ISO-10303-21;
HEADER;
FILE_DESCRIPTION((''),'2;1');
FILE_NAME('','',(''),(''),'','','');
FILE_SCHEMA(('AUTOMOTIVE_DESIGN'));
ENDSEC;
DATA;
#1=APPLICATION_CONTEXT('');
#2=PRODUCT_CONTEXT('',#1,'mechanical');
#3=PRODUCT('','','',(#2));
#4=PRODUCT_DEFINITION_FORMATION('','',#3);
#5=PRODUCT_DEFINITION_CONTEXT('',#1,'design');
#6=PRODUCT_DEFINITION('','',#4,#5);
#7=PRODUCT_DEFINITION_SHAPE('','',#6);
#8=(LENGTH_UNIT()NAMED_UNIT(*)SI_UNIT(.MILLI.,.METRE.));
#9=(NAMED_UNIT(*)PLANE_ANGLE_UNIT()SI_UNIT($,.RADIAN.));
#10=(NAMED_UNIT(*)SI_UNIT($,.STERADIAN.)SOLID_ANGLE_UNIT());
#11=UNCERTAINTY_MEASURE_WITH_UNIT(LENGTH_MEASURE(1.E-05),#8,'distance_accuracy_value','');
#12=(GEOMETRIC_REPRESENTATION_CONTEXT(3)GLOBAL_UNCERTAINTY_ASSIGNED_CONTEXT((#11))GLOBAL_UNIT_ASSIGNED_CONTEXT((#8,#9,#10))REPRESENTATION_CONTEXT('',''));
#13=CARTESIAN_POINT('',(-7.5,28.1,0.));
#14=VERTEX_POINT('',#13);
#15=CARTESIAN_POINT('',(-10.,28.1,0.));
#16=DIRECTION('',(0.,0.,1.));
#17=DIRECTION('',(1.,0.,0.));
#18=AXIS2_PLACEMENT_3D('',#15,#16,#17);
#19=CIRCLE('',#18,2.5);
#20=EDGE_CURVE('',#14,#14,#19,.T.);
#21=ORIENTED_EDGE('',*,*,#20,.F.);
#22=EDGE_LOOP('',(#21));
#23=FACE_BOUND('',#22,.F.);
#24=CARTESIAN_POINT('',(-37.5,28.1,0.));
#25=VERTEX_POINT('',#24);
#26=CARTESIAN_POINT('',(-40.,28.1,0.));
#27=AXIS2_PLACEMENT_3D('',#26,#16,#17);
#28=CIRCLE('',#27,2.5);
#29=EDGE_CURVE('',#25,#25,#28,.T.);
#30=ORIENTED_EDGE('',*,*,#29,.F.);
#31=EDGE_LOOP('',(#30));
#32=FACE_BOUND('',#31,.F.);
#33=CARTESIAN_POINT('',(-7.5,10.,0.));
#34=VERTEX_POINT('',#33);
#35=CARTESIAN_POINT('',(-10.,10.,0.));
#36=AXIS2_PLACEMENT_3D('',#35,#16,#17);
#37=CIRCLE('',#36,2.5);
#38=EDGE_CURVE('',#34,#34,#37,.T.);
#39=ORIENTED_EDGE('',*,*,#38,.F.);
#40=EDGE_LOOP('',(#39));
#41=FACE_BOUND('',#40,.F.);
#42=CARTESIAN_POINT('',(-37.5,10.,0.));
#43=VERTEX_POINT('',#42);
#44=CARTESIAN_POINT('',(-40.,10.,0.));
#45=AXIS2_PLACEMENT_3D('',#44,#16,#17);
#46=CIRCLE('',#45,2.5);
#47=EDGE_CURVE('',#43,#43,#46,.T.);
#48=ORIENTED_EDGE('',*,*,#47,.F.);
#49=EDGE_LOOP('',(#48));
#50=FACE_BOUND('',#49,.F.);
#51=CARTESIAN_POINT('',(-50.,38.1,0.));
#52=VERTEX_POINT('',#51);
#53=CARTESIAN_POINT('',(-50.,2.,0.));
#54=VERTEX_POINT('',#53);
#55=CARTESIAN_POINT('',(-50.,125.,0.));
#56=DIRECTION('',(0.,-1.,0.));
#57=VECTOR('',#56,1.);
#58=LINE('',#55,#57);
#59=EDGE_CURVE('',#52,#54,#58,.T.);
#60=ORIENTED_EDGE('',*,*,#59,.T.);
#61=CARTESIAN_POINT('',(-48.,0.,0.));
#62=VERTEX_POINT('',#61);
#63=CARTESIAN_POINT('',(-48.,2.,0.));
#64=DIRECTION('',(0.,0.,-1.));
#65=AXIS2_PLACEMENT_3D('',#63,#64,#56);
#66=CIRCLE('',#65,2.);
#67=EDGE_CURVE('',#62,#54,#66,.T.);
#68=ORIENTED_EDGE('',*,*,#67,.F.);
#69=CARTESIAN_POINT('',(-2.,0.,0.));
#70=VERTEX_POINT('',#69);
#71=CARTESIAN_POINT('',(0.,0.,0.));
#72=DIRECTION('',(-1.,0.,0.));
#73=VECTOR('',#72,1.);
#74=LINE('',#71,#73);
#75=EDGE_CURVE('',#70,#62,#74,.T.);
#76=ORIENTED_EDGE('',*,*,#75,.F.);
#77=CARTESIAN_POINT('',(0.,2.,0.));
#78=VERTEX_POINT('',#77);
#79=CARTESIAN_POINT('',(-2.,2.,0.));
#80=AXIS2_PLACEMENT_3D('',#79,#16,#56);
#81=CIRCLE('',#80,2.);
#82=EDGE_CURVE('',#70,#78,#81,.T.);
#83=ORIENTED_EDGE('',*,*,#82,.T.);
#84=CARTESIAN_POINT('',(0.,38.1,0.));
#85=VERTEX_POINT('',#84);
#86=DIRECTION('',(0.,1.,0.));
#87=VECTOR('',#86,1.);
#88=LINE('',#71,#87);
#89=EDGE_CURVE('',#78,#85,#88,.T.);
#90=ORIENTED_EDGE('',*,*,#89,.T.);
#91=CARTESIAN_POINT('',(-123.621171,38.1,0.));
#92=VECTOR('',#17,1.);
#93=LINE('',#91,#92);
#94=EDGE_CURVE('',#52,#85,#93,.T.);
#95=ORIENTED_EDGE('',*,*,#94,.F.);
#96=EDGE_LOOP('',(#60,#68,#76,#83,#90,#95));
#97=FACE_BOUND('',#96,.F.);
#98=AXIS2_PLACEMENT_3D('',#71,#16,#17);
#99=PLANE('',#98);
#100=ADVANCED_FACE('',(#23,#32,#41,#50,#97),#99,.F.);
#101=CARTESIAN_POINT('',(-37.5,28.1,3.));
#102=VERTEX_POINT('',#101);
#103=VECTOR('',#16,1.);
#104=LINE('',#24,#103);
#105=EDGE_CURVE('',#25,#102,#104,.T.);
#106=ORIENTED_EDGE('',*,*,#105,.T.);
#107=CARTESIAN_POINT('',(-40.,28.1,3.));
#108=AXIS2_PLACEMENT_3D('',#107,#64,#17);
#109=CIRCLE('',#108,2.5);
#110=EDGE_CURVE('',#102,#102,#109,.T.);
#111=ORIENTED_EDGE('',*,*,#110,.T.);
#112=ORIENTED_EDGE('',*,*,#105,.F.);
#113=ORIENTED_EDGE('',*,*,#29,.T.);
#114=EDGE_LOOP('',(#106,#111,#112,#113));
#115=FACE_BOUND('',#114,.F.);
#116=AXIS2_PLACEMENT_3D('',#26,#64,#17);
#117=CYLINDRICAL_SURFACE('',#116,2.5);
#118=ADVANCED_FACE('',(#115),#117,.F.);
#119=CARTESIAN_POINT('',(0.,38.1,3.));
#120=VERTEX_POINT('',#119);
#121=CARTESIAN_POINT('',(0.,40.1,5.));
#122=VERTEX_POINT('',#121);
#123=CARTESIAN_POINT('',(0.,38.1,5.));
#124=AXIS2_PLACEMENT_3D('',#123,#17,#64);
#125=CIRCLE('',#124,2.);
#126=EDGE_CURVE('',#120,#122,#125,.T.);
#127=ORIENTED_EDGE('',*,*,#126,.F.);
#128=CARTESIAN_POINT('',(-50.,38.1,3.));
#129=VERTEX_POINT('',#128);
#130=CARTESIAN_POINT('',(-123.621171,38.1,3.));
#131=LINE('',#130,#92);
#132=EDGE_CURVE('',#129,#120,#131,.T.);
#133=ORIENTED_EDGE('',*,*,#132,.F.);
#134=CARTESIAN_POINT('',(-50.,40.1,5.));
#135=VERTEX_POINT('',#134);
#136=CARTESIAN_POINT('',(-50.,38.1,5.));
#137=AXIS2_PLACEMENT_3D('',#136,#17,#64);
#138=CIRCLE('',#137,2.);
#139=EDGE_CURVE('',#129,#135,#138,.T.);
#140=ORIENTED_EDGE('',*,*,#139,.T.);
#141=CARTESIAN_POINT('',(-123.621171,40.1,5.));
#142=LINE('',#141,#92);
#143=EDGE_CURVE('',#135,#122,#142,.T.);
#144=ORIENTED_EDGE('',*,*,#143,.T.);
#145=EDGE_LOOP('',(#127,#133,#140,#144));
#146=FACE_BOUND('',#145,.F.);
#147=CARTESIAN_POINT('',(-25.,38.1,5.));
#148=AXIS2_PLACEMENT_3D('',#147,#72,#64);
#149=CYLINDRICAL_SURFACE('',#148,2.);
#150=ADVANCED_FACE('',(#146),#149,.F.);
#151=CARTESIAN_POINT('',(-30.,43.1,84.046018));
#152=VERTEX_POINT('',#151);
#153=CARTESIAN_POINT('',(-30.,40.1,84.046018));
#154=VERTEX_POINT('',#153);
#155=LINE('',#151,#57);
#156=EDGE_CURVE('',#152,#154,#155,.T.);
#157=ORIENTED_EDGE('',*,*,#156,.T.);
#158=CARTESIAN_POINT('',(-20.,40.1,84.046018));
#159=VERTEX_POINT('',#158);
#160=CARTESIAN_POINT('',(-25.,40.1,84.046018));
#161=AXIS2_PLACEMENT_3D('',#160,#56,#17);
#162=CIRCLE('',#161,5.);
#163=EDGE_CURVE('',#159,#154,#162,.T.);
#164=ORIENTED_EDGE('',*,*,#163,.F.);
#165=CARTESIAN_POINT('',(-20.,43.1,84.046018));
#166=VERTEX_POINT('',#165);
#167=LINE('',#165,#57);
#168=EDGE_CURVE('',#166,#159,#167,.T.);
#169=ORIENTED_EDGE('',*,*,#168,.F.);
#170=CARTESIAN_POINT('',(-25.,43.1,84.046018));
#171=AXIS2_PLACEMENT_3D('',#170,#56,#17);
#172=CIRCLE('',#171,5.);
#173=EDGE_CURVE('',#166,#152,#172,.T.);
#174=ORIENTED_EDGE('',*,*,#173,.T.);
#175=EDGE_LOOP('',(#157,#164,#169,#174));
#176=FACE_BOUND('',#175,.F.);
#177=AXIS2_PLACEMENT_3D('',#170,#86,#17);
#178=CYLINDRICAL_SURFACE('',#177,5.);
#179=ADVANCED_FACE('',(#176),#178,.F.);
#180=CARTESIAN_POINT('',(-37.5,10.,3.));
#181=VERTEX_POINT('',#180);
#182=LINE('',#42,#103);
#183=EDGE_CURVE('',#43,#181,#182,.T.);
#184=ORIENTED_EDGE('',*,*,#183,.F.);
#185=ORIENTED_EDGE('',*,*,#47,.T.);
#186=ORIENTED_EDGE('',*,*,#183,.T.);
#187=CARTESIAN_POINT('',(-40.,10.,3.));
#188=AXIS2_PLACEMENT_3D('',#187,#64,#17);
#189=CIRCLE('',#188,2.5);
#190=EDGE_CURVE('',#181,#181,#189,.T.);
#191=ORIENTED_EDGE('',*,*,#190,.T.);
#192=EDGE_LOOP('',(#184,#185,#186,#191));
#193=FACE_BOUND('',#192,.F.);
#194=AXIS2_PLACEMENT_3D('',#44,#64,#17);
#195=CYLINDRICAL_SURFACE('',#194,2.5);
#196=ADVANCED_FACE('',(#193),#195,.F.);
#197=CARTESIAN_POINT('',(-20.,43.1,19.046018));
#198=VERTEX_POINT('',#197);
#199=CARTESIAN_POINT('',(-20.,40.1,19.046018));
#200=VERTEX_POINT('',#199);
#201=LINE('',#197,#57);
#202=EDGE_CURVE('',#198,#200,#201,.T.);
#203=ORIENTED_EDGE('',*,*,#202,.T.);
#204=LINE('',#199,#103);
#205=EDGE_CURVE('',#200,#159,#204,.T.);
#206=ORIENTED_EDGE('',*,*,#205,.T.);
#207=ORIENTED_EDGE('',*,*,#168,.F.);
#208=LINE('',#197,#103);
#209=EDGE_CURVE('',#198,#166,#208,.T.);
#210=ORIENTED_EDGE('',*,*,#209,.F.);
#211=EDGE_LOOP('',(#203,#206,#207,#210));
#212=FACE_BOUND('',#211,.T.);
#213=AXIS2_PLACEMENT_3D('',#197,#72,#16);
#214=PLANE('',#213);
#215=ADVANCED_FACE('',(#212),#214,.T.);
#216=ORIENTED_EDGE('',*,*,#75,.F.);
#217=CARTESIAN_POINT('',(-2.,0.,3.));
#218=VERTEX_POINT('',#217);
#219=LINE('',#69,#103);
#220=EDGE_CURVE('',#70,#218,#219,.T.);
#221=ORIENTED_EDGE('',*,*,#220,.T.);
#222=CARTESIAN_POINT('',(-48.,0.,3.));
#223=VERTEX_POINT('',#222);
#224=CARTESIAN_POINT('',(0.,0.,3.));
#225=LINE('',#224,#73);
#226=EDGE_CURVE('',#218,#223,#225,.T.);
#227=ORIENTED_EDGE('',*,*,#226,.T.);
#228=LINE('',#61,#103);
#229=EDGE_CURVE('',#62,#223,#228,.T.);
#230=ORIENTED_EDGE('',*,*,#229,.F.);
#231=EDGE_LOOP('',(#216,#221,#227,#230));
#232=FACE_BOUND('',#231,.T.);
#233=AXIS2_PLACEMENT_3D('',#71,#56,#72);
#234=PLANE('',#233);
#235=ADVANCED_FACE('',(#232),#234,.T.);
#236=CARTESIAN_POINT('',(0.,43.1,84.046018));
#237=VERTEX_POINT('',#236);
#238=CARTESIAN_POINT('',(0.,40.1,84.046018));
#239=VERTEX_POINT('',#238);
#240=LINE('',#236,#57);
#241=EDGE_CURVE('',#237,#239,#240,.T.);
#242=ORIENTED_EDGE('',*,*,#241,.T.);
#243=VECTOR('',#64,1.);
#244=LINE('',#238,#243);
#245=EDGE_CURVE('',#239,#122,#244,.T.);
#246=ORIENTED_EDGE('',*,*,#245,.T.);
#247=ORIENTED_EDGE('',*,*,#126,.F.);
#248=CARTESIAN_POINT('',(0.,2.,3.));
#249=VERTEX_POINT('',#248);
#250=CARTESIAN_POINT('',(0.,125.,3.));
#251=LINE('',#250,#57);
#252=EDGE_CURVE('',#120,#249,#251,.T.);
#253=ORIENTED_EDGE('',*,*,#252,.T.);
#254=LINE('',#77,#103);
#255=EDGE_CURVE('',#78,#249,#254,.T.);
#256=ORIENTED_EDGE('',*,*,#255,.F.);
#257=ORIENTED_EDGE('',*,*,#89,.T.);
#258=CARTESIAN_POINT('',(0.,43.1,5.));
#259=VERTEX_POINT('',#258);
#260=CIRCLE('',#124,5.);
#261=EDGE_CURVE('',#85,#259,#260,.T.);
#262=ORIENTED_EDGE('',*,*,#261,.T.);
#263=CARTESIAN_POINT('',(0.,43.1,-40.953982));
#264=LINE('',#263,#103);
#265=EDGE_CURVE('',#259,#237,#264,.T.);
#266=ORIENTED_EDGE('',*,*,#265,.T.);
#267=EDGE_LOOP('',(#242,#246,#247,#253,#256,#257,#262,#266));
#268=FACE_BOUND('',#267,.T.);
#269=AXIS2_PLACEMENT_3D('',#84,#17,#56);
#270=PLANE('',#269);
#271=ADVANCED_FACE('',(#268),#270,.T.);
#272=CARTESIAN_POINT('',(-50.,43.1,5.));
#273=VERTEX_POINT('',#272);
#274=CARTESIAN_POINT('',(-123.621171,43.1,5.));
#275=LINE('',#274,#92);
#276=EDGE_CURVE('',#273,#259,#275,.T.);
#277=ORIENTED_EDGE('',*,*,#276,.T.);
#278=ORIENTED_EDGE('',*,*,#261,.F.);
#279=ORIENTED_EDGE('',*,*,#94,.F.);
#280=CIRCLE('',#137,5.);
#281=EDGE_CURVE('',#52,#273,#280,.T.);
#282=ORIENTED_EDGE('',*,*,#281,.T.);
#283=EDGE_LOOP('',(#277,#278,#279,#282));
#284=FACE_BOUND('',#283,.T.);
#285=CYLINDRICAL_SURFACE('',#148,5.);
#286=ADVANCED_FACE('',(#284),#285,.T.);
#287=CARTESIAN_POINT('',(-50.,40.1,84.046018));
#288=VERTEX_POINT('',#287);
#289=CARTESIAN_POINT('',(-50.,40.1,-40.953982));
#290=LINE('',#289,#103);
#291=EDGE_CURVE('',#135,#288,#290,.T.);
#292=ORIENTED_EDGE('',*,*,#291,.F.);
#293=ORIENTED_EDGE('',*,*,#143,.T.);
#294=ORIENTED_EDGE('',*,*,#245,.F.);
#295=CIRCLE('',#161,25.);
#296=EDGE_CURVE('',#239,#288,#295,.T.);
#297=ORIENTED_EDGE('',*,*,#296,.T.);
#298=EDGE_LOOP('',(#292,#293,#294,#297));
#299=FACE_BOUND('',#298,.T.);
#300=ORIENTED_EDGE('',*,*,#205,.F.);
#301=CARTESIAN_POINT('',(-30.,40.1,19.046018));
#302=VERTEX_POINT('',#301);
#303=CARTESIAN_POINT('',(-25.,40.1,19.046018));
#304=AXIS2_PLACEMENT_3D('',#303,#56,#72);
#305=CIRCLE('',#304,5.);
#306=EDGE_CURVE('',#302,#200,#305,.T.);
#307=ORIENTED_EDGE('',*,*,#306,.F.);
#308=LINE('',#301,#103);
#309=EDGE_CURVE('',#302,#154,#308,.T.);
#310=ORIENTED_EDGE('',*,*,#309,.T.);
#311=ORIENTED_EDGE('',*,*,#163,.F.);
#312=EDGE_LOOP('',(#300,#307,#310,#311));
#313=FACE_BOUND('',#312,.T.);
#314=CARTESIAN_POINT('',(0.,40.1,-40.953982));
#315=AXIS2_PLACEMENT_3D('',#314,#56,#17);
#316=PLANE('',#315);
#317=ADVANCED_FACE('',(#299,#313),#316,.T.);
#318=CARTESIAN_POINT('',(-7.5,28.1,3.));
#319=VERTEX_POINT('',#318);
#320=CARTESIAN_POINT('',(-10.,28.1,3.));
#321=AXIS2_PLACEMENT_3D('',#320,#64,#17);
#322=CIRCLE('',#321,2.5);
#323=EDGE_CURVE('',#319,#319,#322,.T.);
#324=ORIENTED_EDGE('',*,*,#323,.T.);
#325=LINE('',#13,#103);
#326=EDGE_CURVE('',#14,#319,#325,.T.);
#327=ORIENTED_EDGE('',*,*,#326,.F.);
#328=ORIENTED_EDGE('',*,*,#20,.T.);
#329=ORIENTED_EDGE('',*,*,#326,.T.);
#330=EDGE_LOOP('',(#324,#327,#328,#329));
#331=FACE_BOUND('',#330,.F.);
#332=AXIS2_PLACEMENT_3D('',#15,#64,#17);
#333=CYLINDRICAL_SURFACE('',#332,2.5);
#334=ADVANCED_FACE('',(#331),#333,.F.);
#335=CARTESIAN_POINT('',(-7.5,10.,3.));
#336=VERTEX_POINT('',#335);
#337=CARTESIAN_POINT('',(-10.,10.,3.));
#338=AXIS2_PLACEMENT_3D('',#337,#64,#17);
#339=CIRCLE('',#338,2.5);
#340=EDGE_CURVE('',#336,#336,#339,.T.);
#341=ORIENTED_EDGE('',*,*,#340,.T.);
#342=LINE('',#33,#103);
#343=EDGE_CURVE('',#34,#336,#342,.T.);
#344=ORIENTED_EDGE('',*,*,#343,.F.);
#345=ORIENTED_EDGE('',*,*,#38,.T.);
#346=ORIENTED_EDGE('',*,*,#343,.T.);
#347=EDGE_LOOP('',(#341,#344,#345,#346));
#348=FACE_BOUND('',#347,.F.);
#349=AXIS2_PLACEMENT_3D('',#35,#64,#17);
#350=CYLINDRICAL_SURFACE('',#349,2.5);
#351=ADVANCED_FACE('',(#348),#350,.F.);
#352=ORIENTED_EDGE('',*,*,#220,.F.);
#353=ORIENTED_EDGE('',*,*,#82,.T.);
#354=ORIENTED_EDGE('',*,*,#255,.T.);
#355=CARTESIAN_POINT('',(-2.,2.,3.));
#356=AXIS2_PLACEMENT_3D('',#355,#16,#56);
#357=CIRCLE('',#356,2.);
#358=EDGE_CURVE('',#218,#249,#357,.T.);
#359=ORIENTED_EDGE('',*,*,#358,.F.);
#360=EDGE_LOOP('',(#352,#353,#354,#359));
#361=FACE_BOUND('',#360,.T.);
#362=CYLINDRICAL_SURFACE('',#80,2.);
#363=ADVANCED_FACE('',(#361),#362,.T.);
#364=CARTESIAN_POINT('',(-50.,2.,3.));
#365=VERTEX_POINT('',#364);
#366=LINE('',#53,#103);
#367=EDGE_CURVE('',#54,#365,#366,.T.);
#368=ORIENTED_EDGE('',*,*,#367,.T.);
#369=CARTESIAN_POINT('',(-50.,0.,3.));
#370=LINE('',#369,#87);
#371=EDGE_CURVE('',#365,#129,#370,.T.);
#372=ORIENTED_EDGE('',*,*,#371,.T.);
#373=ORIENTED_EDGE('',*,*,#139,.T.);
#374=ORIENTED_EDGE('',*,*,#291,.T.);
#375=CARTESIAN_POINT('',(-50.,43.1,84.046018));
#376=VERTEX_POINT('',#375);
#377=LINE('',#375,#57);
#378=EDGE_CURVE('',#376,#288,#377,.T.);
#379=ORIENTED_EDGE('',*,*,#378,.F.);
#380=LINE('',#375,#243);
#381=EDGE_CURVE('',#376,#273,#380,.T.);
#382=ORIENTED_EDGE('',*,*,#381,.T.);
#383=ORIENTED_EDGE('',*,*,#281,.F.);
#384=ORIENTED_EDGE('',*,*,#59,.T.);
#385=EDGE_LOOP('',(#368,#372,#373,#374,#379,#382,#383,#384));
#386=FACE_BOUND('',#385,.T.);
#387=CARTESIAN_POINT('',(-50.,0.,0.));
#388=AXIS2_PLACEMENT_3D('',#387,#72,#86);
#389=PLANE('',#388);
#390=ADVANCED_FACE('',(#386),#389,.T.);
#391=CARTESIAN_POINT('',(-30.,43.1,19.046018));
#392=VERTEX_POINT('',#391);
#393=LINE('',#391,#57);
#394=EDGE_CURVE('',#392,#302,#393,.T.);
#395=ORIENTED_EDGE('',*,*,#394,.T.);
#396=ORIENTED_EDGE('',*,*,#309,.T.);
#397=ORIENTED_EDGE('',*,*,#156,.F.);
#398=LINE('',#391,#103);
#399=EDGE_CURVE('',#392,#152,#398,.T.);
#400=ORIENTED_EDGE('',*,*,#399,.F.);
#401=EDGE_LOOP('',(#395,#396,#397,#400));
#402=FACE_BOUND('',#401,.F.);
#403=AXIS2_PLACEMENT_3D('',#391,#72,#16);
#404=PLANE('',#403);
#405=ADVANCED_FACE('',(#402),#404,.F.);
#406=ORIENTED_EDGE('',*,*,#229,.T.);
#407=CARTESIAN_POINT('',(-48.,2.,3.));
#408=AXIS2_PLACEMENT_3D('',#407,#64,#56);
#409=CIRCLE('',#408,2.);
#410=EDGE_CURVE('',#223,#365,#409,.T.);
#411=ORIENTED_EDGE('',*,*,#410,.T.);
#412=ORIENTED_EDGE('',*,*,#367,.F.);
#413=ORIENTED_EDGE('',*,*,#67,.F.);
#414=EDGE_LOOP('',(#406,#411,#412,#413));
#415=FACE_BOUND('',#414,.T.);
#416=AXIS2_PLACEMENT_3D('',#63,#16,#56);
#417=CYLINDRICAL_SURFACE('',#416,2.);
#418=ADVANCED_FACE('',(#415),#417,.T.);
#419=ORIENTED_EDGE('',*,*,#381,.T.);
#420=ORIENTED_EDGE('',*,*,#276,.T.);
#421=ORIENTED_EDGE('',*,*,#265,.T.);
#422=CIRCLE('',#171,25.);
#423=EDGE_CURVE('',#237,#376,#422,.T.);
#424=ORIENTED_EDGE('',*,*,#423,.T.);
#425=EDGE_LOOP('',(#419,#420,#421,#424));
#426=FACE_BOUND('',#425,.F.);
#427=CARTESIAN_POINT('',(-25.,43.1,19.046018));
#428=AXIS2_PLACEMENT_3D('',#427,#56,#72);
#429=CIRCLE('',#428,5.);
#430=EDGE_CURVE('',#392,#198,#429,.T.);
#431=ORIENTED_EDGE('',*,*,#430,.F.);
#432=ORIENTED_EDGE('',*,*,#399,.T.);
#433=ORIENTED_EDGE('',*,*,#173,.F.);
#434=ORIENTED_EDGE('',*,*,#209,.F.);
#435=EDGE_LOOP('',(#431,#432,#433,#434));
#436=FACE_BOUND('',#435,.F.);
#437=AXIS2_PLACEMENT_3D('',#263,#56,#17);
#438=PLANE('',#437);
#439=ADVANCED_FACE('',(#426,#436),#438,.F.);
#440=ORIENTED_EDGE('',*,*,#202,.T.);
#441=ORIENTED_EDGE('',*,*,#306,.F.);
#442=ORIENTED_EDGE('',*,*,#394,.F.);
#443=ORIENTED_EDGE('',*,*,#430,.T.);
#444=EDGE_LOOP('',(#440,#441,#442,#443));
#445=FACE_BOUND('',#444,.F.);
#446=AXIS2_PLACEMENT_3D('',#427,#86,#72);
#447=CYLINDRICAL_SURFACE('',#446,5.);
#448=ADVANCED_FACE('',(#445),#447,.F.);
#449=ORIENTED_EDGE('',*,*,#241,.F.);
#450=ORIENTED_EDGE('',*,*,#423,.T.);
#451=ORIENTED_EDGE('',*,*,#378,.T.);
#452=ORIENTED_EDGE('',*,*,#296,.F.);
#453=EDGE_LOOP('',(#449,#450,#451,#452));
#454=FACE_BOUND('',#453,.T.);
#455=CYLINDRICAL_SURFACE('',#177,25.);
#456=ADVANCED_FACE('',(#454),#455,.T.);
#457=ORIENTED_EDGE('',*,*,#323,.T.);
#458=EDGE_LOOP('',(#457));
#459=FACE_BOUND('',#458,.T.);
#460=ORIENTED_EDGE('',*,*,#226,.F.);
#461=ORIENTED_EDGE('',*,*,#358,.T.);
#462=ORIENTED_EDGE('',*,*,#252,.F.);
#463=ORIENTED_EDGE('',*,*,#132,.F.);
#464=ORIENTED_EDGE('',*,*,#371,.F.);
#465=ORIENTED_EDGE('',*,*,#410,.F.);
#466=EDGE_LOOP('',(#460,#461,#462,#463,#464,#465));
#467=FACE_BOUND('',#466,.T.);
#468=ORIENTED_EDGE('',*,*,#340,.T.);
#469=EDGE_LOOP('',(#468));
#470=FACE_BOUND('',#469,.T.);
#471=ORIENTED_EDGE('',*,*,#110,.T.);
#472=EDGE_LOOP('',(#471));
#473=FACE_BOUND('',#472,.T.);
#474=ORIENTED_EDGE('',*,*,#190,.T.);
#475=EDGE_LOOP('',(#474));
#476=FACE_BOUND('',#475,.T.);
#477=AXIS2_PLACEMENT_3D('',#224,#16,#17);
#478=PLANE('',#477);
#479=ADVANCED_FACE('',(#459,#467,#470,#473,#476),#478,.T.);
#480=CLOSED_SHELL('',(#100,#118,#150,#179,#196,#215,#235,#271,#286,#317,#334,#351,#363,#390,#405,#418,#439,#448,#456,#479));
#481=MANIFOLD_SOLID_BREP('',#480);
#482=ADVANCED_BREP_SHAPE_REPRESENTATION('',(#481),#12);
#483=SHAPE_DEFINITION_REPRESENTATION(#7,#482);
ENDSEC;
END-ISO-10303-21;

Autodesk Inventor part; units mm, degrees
ref_plane "YZ Plane" through (0, 0, 0) normal (1, 0, 0) x (0, 1, 0)
ref_plane "XZ Plane" through (0, 0, 0) normal (0, 1, 0) x (-1, 0, 0)
ref_plane "XY Plane" through (0, 0, 0) normal (0, 0, 1) x (1, 0, 0)
sketch "Boceto1" plane through (0, 0, 0) normal (0, 0, 1) x (1, 0, 0)
  line L0 (0, 0) -> (-50, 0)
  line L1 (-50, 0) -> (-50, 125)
  line L2 (0, 125) -> (0, 0)
  arc A0 (0, 125) -> (-50, 125) centre (-25, 125) ccw
  arc A1 (-20, 125) -> (-30, 125) centre (-25, 125) ccw
  line L3 (-25, 67.5) -> (-25, 60)
  arc A2 (-30, 60) -> (-20, 60) centre (-25, 60) ccw
  line L4 (-30, 60) -> (-30, 125)
  line L5 (-20, 60) -> (-20, 125)
  line L6 (0, 0) -> (-50, 0)
  line L7 (-50, 0) -> (-50, 38.1)
  line L8 (-50, 38.1) -> (0, 38.1)
  line L9 (0, 38.1) -> (0, 0)
  line L10 (-10, 28.1) -> (-40, 28.1)
  line L11 (-40, 28.1) -> (-40, 10)
  line L12 (-40, 10) -> (-10, 10)
  line L13 (-10, 10) -> (-10, 28.1)
  circle A3 centre (-40, 28.1) radius 2.5
  circle A4 centre (-10, 28.1) radius 2.5
  circle A5 centre (-40, 10) radius 2.5
  circle A6 centre (-10, 10) radius 2.5
  point P0 (-12.5, 10)
  point P1 (-10, 12.5)
  point P2 (-10, 25.6)
  point P3 (-12.5, 28.1)
  point P4 (-37.5, 28.1)
  point P5 (-40, 25.6)
  point P6 (-40, 12.5)
  point P7 (-37.5, 10)
  dimension "d2" = 10
  dimension "d3" = 65
  dimension "d4" = 10
  dimension "d5" = 38.1
  dimension "d6" = 10
  dimension "d7" = 5
  dimension "d8" = 5
  dimension "d9" = 5
  dimension "d10" = 5
extrude "Extrusión1" add sketch "Boceto1" along normal blind 3 contours L0 L1 L8 L2 | L8 L1 A0 L2 | L5 A2 L4 A1 | A3 L11 L10 | L10 L11 A3 | L10 A4 L13 A6 L12 A5 L11 A3 | A4 L13 L10 | L10 L13 A4 | A5 L12 L11 | L11 L12 A5 | A6 L12 L13 | L13 L12 A6
fillet "Empalme1" radius 2 2 edges at (0, 0, 1.5) (-50, 0, 1.5)
extrude "Extrusión2" cut sketch "Boceto1" along normal blind 3 contours L5 A2 L4 A1 | A3 L11 L10 | L10 L11 A3 | A4 L13 L10 | L10 L13 A4 | A5 L12 L11 | L11 L12 A5 | A6 L12 L13 | L13 L12 A6
bend part "Pieza de plegado1" radius 5 angle 90 line through (-50, 38.1, 0) along (1, 0, 0) centre toward (0, 0, 1) moving side (0, 1, 0) both sides no
